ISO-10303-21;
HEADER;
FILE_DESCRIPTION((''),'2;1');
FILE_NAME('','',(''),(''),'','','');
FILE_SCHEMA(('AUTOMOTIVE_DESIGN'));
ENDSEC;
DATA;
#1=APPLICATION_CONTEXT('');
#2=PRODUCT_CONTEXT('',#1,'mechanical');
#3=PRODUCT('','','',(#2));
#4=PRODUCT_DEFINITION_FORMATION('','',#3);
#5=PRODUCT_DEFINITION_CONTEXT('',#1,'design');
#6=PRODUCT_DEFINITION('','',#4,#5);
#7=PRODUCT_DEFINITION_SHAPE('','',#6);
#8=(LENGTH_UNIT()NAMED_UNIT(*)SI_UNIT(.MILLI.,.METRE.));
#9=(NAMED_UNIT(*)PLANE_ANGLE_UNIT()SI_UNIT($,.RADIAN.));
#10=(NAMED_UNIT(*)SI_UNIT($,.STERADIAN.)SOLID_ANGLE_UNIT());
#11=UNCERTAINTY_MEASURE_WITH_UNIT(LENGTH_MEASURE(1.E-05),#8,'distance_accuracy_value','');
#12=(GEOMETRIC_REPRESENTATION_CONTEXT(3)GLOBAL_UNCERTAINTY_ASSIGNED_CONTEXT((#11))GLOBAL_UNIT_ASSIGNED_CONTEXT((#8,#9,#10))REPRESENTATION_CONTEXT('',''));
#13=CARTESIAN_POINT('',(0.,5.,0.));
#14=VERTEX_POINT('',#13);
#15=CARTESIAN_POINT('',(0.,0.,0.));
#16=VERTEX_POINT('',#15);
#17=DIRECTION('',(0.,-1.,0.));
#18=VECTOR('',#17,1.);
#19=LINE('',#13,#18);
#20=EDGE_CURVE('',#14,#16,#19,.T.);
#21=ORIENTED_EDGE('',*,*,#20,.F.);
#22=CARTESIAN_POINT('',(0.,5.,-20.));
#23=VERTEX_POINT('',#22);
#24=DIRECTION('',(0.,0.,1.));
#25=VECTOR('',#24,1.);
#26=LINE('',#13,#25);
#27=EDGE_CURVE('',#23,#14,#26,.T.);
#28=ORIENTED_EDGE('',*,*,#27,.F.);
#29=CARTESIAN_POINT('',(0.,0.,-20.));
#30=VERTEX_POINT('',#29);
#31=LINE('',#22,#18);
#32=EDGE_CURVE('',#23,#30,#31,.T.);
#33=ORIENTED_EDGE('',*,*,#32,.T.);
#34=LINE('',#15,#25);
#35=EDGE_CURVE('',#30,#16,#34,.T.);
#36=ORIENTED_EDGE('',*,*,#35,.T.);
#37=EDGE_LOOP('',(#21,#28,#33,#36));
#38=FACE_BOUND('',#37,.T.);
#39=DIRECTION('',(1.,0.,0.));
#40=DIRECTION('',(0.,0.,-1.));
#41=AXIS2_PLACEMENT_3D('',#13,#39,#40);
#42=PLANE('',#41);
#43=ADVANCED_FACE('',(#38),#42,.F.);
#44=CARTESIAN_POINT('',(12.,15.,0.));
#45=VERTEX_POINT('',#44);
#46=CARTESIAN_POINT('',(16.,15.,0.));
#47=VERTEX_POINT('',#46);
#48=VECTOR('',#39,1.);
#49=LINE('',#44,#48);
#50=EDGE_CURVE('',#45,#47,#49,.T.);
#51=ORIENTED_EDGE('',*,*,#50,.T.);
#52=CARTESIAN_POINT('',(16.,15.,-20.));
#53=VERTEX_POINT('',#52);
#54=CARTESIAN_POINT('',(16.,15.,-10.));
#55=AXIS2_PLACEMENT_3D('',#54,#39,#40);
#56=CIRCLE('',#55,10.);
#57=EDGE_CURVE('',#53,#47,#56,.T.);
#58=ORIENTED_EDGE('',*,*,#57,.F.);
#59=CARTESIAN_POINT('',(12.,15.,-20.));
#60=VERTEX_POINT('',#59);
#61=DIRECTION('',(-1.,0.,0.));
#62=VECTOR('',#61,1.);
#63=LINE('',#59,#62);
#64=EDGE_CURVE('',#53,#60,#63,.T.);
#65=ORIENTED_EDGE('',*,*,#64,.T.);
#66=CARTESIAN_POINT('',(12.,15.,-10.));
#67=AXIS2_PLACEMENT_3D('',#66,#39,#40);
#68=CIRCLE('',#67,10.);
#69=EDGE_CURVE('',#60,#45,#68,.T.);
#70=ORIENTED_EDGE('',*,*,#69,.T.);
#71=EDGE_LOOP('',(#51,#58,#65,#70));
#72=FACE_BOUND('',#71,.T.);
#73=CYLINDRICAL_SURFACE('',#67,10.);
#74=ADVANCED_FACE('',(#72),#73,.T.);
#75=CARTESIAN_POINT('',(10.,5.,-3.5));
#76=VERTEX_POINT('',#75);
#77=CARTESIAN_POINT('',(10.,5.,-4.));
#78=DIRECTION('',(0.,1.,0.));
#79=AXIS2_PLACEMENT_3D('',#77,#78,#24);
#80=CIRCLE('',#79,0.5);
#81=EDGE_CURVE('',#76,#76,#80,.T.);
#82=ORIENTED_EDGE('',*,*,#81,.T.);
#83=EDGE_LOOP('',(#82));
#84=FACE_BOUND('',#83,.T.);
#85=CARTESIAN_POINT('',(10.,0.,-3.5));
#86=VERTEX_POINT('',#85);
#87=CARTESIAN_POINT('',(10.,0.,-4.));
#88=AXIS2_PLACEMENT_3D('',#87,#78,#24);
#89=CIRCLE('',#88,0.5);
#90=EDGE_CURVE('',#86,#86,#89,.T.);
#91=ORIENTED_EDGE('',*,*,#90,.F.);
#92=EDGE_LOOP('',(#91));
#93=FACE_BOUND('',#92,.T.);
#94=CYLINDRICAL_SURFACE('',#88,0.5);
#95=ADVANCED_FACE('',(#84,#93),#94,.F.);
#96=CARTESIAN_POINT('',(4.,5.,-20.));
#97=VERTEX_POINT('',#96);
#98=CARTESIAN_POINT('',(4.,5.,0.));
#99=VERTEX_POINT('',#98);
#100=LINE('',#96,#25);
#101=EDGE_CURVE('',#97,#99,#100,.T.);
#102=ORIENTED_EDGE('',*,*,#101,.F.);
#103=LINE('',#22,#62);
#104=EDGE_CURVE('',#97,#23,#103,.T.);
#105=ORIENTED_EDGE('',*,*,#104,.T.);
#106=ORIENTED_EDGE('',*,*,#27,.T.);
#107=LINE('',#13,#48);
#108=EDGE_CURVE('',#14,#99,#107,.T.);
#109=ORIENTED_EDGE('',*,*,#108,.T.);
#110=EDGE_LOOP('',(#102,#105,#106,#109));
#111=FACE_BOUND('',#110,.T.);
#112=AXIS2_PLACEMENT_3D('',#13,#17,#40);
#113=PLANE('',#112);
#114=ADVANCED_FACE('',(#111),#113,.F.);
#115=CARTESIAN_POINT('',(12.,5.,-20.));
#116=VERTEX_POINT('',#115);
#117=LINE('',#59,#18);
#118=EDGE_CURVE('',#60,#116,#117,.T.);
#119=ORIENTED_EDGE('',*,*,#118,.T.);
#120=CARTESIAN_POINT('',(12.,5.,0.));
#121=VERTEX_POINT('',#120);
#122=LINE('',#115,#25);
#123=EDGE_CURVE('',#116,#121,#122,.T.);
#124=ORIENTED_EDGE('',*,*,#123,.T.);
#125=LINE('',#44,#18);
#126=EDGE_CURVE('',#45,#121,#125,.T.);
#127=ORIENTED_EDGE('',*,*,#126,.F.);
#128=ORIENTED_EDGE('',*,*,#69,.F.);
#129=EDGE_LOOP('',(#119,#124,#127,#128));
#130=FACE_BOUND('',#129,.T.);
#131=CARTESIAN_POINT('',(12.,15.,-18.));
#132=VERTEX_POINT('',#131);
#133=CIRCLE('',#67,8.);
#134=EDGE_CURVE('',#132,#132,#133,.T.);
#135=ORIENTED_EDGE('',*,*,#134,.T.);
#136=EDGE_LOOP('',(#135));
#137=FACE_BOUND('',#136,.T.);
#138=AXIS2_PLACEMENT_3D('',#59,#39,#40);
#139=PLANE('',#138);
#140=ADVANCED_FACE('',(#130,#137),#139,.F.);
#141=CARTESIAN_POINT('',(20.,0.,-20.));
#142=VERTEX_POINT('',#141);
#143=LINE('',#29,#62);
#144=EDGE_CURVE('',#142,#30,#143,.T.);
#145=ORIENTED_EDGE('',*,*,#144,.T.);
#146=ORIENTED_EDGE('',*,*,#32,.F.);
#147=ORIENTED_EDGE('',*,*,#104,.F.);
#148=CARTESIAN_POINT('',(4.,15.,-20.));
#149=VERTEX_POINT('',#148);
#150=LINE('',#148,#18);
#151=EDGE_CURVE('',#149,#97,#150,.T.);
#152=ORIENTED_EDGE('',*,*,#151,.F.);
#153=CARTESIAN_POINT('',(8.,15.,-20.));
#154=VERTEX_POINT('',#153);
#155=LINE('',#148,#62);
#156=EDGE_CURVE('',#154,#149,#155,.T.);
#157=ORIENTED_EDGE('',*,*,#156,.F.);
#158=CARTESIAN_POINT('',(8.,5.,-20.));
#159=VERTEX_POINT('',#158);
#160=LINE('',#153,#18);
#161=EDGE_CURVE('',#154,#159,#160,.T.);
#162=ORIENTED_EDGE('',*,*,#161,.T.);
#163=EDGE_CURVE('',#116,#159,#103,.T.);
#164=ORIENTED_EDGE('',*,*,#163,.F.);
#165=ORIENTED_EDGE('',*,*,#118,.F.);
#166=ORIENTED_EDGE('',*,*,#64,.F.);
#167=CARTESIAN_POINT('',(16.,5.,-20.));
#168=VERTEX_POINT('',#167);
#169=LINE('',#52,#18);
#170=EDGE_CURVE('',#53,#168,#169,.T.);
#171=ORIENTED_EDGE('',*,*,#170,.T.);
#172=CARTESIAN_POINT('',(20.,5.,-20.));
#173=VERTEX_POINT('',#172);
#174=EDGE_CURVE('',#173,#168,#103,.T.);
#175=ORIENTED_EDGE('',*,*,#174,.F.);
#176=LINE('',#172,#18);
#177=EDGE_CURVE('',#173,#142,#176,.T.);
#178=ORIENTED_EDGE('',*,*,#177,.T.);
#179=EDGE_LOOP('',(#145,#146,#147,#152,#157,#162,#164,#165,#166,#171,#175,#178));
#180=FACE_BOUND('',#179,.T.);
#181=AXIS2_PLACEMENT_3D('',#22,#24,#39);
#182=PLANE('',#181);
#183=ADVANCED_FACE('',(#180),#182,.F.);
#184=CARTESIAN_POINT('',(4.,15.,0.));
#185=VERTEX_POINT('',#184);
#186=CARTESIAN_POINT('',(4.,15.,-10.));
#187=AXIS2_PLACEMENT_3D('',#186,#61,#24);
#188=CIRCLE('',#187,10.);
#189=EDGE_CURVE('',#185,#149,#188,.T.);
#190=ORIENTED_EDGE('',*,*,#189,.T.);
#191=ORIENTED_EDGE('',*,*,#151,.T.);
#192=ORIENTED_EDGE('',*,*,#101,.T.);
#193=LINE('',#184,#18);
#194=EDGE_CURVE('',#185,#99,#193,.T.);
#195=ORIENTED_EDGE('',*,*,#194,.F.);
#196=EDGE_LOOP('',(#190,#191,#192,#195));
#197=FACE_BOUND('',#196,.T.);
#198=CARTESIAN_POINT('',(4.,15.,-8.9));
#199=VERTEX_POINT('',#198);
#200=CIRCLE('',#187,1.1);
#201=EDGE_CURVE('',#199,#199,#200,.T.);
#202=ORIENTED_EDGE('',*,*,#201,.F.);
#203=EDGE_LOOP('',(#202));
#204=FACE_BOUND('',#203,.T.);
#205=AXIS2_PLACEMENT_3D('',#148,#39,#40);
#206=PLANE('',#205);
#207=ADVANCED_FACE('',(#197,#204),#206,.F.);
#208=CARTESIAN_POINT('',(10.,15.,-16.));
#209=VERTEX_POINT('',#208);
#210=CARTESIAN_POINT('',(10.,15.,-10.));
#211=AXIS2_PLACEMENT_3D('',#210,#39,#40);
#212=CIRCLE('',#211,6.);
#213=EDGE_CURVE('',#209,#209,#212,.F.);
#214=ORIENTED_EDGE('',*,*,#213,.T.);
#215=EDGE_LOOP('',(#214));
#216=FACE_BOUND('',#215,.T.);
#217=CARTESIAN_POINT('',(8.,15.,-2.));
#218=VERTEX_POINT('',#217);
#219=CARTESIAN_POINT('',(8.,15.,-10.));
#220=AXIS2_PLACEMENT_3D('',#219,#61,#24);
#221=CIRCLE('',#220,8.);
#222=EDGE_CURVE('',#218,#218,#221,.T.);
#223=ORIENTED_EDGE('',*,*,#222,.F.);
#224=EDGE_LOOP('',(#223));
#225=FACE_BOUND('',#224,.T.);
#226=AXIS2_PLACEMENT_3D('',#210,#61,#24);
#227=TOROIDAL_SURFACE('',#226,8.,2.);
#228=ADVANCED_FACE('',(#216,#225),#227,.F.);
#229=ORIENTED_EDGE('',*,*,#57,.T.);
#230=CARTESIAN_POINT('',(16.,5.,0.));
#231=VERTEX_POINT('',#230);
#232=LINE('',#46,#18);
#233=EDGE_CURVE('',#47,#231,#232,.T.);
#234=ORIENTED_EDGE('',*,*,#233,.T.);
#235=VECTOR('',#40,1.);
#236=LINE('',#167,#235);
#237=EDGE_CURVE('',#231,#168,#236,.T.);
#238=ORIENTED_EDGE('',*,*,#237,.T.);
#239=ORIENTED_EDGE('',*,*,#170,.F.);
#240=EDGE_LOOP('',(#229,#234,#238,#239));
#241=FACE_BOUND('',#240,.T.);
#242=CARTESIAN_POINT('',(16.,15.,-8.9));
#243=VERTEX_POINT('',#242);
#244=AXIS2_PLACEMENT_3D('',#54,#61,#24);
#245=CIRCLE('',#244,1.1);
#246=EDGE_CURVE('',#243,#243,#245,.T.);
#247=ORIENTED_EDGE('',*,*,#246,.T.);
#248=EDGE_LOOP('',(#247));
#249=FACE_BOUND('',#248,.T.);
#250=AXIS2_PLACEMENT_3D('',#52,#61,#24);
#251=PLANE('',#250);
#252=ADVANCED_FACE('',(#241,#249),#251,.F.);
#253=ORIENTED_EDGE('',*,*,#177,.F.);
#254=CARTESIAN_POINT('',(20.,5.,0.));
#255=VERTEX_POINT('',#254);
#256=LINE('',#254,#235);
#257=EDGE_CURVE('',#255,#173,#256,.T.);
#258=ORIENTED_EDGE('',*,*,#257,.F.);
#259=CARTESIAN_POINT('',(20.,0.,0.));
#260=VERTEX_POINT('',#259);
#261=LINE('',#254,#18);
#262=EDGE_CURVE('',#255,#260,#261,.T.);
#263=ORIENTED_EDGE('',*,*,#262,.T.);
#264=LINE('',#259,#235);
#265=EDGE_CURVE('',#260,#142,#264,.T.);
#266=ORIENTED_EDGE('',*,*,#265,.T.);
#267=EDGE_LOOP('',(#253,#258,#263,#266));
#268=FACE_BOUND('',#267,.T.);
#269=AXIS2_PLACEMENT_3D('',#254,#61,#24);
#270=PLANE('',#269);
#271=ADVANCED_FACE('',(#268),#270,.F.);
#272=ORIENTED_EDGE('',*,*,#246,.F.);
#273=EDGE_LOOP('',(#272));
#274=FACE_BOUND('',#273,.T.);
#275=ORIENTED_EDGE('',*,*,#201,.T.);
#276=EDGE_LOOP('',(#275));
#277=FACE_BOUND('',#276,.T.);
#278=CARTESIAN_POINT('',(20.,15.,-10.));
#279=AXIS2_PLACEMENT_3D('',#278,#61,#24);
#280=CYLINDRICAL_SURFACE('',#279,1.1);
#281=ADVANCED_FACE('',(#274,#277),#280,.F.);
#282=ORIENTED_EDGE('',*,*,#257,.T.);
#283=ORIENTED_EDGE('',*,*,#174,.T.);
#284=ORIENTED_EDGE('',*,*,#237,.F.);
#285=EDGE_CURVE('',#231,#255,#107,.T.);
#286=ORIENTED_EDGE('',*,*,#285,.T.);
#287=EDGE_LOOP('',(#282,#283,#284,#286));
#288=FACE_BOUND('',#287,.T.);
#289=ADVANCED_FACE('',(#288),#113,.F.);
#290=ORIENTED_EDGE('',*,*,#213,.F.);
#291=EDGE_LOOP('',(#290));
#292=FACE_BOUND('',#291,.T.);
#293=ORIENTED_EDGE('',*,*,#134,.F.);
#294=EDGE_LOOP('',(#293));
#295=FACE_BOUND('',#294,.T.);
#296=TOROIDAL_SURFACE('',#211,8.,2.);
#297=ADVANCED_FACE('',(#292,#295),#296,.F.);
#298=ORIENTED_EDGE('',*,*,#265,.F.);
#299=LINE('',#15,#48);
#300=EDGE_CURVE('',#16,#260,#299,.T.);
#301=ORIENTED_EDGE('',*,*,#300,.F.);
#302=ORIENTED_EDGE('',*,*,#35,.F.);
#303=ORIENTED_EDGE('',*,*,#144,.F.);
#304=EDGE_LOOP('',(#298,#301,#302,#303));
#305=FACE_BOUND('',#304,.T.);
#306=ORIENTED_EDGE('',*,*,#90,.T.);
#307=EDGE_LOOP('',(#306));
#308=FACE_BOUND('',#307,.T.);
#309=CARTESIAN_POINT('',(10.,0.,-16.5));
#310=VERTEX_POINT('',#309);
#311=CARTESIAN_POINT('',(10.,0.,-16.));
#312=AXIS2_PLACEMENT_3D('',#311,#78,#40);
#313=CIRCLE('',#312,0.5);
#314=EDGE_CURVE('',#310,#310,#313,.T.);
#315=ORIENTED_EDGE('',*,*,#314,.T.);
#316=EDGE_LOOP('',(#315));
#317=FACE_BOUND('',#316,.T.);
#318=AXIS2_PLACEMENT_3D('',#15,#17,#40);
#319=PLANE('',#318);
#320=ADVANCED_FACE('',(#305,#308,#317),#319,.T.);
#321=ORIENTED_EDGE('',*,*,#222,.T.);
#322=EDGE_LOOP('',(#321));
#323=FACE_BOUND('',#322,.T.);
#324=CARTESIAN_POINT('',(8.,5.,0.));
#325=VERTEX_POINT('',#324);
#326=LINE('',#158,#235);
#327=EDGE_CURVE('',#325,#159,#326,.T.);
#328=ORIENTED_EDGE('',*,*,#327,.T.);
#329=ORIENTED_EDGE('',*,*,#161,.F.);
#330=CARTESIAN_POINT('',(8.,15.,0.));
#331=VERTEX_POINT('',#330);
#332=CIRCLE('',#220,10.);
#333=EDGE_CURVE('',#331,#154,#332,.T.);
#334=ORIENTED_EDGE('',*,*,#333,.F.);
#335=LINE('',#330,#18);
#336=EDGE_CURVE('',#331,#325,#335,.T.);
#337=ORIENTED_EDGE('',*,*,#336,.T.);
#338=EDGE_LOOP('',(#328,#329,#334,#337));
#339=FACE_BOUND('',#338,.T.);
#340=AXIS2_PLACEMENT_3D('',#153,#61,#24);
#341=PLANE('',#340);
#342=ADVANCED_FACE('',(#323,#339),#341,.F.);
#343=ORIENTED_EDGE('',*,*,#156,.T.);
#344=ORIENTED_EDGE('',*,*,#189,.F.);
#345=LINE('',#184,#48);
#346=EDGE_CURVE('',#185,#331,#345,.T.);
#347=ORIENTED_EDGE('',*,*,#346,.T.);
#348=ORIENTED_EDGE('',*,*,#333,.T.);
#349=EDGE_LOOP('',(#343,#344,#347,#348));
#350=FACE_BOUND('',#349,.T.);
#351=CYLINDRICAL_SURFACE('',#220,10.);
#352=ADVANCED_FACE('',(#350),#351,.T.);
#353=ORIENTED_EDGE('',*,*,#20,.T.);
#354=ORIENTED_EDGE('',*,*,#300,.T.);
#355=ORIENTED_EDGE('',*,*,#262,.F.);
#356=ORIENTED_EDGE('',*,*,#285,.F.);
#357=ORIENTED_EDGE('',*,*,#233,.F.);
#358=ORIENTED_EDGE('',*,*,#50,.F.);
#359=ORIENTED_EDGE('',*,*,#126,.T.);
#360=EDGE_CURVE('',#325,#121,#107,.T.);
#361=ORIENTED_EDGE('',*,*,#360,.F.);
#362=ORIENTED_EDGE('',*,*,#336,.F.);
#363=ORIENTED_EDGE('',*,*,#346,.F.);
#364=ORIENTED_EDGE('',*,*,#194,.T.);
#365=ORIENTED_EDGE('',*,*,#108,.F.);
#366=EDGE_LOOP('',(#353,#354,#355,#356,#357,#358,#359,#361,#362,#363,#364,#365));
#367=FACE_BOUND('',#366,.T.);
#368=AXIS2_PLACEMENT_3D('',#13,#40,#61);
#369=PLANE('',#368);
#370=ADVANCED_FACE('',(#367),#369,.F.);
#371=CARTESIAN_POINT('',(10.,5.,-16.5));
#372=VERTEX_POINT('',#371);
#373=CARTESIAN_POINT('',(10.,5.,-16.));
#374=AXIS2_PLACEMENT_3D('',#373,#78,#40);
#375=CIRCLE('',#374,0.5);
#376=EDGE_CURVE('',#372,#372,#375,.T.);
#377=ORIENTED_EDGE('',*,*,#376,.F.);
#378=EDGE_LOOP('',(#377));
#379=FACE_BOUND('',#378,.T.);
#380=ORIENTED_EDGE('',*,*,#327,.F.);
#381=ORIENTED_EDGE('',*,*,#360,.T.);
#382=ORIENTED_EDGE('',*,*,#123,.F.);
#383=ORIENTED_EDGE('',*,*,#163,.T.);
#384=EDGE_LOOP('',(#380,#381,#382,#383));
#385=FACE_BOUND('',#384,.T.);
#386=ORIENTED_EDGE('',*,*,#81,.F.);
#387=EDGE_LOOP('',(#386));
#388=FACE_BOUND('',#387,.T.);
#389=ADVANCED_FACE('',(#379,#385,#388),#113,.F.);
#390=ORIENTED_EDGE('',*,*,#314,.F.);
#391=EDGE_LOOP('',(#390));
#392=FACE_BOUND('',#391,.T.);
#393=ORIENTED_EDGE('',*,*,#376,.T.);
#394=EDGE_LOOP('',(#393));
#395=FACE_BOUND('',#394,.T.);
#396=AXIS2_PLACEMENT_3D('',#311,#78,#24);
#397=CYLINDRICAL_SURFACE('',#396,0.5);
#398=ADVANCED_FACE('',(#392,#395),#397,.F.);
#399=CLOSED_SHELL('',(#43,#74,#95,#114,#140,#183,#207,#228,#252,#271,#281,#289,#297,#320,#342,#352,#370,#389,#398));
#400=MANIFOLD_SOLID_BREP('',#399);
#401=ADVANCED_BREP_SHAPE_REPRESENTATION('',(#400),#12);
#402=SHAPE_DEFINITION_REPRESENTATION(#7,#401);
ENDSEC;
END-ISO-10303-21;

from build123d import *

# Parameters (mm, degrees)
SKETCH1_W           = 20
SKETCH1_H           = 20
BOSS_EXTRUDE1_DEPTH = 5
SKETCH3_W           = 4
SKETCH3_H           = 20
BOSS_EXTRUDE2_DEPTH = 10
SKETCH4_R           = 10
BOSS_EXTRUDE3_DEPTH = 4
BOSS_EXTRUDE4_START = -4
SKETCH5_R           = 10
BOSS_EXTRUDE4_DEPTH = 4
SKETCH6_R           = 1.1
CUT_EXTRUDE1_DEPTH  = 36.791060336
SKETCH7_R           = 0.5
CUT_EXTRUDE2_DEPTH  = 35.641016151
SKETCH9_R           = 6
BOSS_EXTRUDE5_DEPTH = 4
SKETCH10_R          = 1.1
CUT_EXTRUDE3_DEPTH  = 4
FILLET1_R           = 2


with BuildPart() as part:
    # Sketch1 → Boss-Extrude1 (new body)
    with BuildSketch(Plane(origin=(0, 0, 0), x_dir=(1, 0, 0), z_dir=(0, 1, 0))):
        with Locations((10, 10)):
            Rectangle(SKETCH1_W, SKETCH1_H)
    extrude(amount=BOSS_EXTRUDE1_DEPTH)

    # Sketch3 → Boss-Extrude2 (add)
    with BuildSketch(Plane(origin=(0, 5, 0), x_dir=(1, 0, 0), z_dir=(0, 1, 0))):
        with Locations((6, 10)):
            Rectangle(SKETCH3_W, SKETCH3_H)
        with Locations((14, 10)):
            Rectangle(SKETCH3_W, SKETCH3_H)
    extrude(amount=BOSS_EXTRUDE2_DEPTH)

    # Sketch4 → Boss-Extrude3 (add)
    with BuildSketch(Plane.ZY.offset(-4)):
        with Locations((-10, 15)):
            Circle(SKETCH4_R)
    extrude(amount=-BOSS_EXTRUDE3_DEPTH)

    # Sketch5 → Boss-Extrude4 (add)
    with BuildSketch(Plane(origin=(16, 0, 0), x_dir=(0, 0, -1), z_dir=(1, 0, 0)).offset(BOSS_EXTRUDE4_START)):
        with Locations((10, 15)):
            Circle(SKETCH5_R)
    extrude(amount=BOSS_EXTRUDE4_DEPTH)

    # Sketch6 → Cut-Extrude1 (cut, through all)
    with BuildSketch(Plane.ZY.offset(-4)):
        with Locations((-10, 15)):
            Circle(SKETCH6_R)
    extrude(amount=-CUT_EXTRUDE1_DEPTH, mode=Mode.SUBTRACT)

    # Sketch7 → Cut-Extrude2 (cut, through all)
    with BuildSketch(Plane(origin=(0, 5, 0), x_dir=(1, 0, 0), z_dir=(0, 1, 0))):
        with Locations(Location((10, 4, 0), (0, 0, 270))):
            Circle(SKETCH7_R)
        with Locations(Location((10, 16, 0), (0, 0, 90))):
            Circle(SKETCH7_R)
    extrude(amount=-CUT_EXTRUDE2_DEPTH, mode=Mode.SUBTRACT)

    # Sketch9 → Boss-Extrude5 (add)
    with BuildSketch(Plane(origin=(8, 0, 0), x_dir=(0, 0, -1), z_dir=(1, 0, 0))):
        with Locations(Location((10, 15, 0), (0, 0, 180))):
            Circle(SKETCH9_R)
    extrude(amount=BOSS_EXTRUDE5_DEPTH)

    # Sketch10 → Cut-Extrude3 (cut)
    with BuildSketch(Plane(origin=(8, 0, 0), x_dir=(0, 0, -1), z_dir=(1, 0, 0))):
        with Locations(Location((10, 15, 0), (0, 0, 180))):
            Circle(SKETCH10_R)
    extrude(amount=CUT_EXTRUDE3_DEPTH, mode=Mode.SUBTRACT)

    # Fillet1
    fillet1_edges = [part.edges().sort_by_distance(p)[0] for p in [
        (12, 15, -16),
        (8, 15, -16),
    ]]
    fillet(fillet1_edges, radius=FILLET1_R - 0.0001)  # a hair under: the kernel refuses the full size


solid = part.part
